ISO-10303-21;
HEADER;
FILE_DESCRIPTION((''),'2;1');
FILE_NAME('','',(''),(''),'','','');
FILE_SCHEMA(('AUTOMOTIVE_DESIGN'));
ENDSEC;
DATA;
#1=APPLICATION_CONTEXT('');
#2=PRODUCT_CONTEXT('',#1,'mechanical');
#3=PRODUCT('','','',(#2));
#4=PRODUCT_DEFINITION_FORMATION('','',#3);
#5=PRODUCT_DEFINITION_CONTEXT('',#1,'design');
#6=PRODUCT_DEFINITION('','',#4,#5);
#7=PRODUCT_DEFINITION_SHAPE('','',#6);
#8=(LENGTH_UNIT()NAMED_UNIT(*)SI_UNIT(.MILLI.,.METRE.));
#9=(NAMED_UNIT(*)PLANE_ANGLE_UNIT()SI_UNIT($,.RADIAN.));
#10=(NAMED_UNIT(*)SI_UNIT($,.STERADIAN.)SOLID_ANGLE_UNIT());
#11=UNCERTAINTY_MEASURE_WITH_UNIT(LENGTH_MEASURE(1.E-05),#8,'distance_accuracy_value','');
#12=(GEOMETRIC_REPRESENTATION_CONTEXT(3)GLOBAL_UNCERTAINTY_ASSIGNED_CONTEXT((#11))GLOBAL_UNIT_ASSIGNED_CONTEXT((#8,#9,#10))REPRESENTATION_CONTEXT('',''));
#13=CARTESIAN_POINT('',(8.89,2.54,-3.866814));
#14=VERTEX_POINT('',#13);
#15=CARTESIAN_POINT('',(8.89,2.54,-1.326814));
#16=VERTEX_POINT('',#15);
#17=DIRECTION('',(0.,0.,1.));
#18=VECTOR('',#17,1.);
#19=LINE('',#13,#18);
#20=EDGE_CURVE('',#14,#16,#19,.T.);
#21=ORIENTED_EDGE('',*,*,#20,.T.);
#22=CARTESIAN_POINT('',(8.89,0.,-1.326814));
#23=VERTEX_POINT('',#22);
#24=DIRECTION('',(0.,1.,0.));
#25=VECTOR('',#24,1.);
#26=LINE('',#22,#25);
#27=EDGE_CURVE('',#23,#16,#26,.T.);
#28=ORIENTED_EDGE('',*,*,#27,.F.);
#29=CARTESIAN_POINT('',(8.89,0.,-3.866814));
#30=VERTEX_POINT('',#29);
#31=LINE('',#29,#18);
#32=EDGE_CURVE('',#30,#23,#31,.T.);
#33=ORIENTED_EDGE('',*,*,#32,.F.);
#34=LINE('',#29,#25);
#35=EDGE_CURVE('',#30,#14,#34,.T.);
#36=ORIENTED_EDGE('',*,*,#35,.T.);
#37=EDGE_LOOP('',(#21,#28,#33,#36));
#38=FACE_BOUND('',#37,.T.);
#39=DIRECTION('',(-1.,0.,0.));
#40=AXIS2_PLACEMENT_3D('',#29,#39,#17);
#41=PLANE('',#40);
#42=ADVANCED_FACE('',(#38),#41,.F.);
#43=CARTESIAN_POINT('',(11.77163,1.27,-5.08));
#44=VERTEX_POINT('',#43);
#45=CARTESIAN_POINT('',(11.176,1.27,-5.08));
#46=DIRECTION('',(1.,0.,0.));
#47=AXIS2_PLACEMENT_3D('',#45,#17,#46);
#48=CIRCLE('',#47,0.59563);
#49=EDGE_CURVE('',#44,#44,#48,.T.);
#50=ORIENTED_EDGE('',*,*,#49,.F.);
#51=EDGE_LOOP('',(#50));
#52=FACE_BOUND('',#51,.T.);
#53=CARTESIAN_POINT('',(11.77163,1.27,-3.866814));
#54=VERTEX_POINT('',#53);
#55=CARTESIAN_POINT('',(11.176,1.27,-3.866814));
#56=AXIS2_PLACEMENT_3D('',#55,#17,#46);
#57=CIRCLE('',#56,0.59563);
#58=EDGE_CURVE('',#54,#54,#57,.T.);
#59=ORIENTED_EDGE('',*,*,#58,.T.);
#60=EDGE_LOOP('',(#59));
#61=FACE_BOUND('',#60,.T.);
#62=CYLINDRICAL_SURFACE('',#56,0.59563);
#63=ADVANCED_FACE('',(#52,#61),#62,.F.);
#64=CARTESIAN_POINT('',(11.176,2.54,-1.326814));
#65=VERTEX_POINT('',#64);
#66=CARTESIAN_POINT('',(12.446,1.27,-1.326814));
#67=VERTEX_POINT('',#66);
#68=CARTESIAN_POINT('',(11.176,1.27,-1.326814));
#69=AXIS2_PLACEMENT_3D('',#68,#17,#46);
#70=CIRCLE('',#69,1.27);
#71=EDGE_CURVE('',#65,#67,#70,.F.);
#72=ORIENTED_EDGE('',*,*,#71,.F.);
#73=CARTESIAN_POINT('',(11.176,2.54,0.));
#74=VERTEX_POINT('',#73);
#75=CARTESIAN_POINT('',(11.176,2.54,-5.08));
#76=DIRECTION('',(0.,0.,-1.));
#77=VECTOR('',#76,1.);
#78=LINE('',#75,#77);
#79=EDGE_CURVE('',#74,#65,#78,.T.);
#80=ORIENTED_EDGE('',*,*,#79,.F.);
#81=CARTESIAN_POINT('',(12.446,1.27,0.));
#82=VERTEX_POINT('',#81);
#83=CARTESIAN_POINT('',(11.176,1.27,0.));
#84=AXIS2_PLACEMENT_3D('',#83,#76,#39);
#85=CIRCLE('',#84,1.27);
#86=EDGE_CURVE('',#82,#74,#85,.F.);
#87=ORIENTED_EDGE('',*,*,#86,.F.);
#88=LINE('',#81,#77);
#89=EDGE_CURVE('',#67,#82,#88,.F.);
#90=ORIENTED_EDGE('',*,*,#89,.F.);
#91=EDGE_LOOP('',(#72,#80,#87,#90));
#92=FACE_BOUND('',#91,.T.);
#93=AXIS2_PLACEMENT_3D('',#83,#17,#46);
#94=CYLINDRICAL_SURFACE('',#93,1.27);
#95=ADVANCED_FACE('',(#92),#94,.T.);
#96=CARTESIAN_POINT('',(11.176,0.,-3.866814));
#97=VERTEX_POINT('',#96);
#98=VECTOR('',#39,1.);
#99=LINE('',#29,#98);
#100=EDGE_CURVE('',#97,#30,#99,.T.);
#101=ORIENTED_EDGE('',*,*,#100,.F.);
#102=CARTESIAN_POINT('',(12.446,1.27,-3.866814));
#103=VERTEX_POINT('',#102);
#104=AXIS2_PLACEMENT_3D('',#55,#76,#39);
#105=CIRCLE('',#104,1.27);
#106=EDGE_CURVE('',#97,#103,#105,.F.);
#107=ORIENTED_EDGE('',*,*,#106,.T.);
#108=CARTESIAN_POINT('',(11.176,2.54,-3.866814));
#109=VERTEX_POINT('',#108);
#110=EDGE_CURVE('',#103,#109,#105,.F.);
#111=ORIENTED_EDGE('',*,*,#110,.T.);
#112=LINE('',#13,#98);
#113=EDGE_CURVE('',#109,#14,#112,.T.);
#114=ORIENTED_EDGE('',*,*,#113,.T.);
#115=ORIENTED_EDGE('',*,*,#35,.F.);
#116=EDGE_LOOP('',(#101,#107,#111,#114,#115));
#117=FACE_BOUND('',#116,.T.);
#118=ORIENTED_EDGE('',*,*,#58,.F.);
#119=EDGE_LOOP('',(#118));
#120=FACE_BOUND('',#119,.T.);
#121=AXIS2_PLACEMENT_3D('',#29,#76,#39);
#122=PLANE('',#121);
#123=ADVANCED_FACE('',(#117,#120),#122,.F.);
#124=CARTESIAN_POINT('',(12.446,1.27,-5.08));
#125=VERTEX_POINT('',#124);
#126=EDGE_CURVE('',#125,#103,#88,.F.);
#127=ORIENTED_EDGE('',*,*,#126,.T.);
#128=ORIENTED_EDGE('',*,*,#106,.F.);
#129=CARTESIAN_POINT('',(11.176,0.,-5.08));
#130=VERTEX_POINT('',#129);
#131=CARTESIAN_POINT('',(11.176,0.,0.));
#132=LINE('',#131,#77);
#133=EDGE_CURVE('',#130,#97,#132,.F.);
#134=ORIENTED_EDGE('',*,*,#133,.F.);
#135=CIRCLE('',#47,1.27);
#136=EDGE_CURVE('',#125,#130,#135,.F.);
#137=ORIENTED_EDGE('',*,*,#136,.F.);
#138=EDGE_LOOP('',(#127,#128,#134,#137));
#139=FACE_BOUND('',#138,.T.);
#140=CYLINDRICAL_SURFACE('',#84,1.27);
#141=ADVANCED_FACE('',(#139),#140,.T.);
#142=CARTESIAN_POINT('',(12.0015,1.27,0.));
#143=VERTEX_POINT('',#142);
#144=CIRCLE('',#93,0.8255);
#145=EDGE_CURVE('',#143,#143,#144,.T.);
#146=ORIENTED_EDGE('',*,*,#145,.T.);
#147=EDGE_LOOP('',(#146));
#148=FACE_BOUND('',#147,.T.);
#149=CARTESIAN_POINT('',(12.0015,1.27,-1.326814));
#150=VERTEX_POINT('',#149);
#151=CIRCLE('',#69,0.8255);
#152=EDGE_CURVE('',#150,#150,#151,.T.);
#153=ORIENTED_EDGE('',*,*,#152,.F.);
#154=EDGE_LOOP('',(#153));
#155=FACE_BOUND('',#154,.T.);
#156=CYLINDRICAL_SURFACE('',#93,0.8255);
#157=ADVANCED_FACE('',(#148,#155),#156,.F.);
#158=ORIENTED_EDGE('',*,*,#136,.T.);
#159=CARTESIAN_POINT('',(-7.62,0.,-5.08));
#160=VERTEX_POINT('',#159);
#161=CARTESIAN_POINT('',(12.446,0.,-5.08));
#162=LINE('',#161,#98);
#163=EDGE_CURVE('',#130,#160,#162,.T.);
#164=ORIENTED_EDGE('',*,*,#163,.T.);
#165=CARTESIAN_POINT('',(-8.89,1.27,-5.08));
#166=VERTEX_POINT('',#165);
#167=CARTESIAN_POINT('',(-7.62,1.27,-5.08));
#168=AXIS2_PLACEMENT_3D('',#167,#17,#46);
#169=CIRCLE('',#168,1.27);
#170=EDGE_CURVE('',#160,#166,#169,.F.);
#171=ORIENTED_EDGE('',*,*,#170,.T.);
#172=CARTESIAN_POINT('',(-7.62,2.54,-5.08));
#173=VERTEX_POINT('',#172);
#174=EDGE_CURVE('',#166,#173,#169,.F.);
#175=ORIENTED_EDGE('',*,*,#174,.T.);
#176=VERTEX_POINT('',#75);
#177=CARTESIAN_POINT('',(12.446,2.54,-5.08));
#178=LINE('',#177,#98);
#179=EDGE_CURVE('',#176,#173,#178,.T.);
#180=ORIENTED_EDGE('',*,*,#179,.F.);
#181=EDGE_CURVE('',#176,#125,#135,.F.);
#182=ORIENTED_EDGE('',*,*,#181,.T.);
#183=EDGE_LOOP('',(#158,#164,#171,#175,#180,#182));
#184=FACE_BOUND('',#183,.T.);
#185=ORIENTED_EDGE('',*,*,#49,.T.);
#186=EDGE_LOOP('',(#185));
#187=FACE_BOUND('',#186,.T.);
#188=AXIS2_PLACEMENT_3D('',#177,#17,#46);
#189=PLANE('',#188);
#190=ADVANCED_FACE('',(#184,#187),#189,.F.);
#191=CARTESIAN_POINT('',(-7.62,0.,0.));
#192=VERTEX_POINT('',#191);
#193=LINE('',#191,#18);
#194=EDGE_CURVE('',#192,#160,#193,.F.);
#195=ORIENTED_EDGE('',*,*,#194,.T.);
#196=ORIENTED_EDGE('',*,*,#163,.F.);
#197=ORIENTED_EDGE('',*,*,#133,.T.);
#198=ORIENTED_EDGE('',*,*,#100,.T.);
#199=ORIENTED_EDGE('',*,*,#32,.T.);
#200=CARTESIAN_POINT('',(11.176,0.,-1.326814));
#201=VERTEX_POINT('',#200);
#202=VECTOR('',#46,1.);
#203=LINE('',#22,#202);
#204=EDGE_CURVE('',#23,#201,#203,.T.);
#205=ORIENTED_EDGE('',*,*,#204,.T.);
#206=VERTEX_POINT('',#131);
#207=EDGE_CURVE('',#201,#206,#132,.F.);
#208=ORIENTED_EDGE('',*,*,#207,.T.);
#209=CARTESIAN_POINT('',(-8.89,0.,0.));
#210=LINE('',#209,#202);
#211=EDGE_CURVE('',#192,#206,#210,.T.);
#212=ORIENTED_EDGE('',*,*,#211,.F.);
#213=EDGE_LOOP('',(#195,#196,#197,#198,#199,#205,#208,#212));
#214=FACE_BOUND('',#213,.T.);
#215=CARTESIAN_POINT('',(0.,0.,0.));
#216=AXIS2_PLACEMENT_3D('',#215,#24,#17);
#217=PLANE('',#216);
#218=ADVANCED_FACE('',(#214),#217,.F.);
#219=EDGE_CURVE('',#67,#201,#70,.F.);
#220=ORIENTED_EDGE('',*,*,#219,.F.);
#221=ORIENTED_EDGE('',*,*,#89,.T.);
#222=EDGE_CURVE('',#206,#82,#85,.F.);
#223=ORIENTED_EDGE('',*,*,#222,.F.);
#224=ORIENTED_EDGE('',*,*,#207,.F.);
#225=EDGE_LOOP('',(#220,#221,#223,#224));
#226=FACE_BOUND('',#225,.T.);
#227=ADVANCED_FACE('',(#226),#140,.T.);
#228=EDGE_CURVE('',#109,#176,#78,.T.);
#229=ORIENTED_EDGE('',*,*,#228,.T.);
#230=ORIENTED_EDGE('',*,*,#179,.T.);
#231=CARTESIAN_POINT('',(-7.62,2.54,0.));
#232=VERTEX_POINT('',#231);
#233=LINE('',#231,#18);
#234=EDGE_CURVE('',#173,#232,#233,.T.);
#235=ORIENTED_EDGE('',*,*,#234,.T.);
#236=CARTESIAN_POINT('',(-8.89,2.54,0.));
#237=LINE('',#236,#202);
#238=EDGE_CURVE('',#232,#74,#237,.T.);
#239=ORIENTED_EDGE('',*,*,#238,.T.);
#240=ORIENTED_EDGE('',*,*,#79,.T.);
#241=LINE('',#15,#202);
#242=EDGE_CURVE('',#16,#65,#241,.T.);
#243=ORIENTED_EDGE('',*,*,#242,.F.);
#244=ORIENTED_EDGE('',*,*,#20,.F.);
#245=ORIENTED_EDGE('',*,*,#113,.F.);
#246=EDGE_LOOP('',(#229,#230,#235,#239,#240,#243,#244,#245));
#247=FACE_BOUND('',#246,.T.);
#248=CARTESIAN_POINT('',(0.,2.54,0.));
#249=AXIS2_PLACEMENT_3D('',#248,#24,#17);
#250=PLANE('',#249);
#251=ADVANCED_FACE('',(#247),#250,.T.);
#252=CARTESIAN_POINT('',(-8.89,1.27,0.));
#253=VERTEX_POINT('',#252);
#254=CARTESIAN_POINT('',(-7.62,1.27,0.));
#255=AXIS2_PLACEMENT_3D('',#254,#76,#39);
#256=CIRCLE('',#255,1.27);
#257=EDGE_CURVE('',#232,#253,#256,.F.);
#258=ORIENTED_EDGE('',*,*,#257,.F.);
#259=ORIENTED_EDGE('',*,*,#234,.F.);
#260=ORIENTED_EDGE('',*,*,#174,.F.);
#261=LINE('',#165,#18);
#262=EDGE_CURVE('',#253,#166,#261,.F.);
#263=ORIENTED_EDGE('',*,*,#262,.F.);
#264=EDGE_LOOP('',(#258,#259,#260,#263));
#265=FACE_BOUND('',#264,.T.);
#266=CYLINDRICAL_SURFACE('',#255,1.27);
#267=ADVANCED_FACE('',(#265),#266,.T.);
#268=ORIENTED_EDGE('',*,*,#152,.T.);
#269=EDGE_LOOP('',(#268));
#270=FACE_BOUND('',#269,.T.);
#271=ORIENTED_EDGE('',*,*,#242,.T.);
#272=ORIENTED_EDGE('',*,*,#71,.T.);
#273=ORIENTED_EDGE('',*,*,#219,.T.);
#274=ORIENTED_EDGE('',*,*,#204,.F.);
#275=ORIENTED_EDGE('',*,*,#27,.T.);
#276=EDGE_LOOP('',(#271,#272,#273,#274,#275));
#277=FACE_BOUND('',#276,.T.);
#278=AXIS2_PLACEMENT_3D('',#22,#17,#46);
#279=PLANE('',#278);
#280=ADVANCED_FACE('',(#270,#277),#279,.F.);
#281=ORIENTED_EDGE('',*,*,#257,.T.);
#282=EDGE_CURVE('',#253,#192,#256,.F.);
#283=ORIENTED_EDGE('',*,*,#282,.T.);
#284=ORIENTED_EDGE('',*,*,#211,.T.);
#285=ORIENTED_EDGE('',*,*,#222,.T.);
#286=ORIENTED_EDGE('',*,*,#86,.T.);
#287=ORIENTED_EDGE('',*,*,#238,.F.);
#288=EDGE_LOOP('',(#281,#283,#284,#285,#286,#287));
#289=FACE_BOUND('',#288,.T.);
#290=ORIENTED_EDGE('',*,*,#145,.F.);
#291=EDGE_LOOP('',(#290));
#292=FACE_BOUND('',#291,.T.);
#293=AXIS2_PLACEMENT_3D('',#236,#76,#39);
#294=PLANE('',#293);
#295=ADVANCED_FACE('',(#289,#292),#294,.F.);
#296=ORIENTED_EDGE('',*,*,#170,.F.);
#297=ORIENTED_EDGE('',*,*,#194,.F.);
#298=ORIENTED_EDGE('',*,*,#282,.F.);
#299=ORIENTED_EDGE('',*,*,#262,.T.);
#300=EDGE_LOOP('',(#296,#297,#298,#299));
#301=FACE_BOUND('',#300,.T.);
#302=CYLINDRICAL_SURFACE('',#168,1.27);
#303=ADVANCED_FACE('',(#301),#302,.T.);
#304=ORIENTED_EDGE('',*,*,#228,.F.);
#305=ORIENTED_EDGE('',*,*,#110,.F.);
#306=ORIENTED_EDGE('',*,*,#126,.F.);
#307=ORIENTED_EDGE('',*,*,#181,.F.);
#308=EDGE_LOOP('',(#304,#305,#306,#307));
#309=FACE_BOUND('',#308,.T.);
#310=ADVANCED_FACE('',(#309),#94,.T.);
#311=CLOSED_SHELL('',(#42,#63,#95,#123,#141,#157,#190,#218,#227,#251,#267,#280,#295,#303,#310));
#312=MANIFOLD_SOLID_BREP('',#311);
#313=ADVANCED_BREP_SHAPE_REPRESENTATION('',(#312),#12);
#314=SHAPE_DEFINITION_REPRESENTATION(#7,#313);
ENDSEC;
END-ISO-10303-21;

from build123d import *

# Parameters (mm, degrees)
SKETCH1_W                        = 21.336
SKETCH1_H                        = 5.08
BOSS_EXTRUDE1_DEPTH              = 2.54
FILLET1_R                        = 1.27
SKETCH8_W                        = 3.556
SKETCH8_H                        = 2.54
CUT_EXTRUDE1_DEPTH               = 2.54
F_97_0_0059_DIAMETER_HOLE1_D     = 1.651
F_97_0_0059_DIAMETER_HOLE1_DEPTH = 1.524
F_97_0_0059_DIAMETER_HOLE1_TIP   = 0.496010441
F_0_80_TAPPED_HOLE1_D            = 1.19126
F_0_80_TAPPED_HOLE1_DEPTH        = 4.064
F_0_80_TAPPED_HOLE1_TIP          = 0.357890611


with BuildPart() as part:
    # Sketch1 → Boss-Extrude1 (new body)
    with BuildSketch(Plane(origin=(0, 0, 0), x_dir=(1, 0, 0), z_dir=(0, 1, 0))):
        with Locations((1.778, 2.54)):
            Rectangle(SKETCH1_W, SKETCH1_H)
    extrude(amount=BOSS_EXTRUDE1_DEPTH)

    # Fillet1
    fillet1_edges = [part.edges().sort_by_distance(p)[0] for p in [
        (-8.89, 0, -2.54),
        (-8.89, 2.54, -2.54),
        (12.446, 0, -2.54),
        (12.446, 2.54, -2.54),
    ]]
    fillet(fillet1_edges, radius=FILLET1_R - 0.0001)  # a hair under: the kernel refuses the full size

    # Sketch8 → Cut-Extrude1 (cut)
    with BuildSketch(Plane(origin=(0, 2.54, 0), x_dir=(1, 0, 0), z_dir=(0, 1, 0))):
        with Locations((10.668, 2.596814381)):
            Rectangle(SKETCH8_W, SKETCH8_H)
    extrude(amount=-CUT_EXTRUDE1_DEPTH, mode=Mode.SUBTRACT)

    # #97 (0.0059) Diameter Hole1
    with Locations(Plane.XY):
        with Locations((11.176, 1.27)):
            Hole(F_97_0_0059_DIAMETER_HOLE1_D / 2, depth=F_97_0_0059_DIAMETER_HOLE1_DEPTH)
            with Locations((0, 0, -(F_97_0_0059_DIAMETER_HOLE1_DEPTH + F_97_0_0059_DIAMETER_HOLE1_TIP / 2))):  # 118° drill point
                Cone(0, F_97_0_0059_DIAMETER_HOLE1_D / 2, F_97_0_0059_DIAMETER_HOLE1_TIP, mode=Mode.SUBTRACT)

    # #0-80 Tapped Hole1
    with Locations(Plane.XY.offset(-3.866814381)):
        with Locations((11.176, 1.27)):
            Hole(F_0_80_TAPPED_HOLE1_D / 2, depth=F_0_80_TAPPED_HOLE1_DEPTH)
            with Locations((0, 0, -(F_0_80_TAPPED_HOLE1_DEPTH + F_0_80_TAPPED_HOLE1_TIP / 2))):  # 118° drill point
                Cone(0, F_0_80_TAPPED_HOLE1_D / 2, F_0_80_TAPPED_HOLE1_TIP, mode=Mode.SUBTRACT)


solid = part.part
